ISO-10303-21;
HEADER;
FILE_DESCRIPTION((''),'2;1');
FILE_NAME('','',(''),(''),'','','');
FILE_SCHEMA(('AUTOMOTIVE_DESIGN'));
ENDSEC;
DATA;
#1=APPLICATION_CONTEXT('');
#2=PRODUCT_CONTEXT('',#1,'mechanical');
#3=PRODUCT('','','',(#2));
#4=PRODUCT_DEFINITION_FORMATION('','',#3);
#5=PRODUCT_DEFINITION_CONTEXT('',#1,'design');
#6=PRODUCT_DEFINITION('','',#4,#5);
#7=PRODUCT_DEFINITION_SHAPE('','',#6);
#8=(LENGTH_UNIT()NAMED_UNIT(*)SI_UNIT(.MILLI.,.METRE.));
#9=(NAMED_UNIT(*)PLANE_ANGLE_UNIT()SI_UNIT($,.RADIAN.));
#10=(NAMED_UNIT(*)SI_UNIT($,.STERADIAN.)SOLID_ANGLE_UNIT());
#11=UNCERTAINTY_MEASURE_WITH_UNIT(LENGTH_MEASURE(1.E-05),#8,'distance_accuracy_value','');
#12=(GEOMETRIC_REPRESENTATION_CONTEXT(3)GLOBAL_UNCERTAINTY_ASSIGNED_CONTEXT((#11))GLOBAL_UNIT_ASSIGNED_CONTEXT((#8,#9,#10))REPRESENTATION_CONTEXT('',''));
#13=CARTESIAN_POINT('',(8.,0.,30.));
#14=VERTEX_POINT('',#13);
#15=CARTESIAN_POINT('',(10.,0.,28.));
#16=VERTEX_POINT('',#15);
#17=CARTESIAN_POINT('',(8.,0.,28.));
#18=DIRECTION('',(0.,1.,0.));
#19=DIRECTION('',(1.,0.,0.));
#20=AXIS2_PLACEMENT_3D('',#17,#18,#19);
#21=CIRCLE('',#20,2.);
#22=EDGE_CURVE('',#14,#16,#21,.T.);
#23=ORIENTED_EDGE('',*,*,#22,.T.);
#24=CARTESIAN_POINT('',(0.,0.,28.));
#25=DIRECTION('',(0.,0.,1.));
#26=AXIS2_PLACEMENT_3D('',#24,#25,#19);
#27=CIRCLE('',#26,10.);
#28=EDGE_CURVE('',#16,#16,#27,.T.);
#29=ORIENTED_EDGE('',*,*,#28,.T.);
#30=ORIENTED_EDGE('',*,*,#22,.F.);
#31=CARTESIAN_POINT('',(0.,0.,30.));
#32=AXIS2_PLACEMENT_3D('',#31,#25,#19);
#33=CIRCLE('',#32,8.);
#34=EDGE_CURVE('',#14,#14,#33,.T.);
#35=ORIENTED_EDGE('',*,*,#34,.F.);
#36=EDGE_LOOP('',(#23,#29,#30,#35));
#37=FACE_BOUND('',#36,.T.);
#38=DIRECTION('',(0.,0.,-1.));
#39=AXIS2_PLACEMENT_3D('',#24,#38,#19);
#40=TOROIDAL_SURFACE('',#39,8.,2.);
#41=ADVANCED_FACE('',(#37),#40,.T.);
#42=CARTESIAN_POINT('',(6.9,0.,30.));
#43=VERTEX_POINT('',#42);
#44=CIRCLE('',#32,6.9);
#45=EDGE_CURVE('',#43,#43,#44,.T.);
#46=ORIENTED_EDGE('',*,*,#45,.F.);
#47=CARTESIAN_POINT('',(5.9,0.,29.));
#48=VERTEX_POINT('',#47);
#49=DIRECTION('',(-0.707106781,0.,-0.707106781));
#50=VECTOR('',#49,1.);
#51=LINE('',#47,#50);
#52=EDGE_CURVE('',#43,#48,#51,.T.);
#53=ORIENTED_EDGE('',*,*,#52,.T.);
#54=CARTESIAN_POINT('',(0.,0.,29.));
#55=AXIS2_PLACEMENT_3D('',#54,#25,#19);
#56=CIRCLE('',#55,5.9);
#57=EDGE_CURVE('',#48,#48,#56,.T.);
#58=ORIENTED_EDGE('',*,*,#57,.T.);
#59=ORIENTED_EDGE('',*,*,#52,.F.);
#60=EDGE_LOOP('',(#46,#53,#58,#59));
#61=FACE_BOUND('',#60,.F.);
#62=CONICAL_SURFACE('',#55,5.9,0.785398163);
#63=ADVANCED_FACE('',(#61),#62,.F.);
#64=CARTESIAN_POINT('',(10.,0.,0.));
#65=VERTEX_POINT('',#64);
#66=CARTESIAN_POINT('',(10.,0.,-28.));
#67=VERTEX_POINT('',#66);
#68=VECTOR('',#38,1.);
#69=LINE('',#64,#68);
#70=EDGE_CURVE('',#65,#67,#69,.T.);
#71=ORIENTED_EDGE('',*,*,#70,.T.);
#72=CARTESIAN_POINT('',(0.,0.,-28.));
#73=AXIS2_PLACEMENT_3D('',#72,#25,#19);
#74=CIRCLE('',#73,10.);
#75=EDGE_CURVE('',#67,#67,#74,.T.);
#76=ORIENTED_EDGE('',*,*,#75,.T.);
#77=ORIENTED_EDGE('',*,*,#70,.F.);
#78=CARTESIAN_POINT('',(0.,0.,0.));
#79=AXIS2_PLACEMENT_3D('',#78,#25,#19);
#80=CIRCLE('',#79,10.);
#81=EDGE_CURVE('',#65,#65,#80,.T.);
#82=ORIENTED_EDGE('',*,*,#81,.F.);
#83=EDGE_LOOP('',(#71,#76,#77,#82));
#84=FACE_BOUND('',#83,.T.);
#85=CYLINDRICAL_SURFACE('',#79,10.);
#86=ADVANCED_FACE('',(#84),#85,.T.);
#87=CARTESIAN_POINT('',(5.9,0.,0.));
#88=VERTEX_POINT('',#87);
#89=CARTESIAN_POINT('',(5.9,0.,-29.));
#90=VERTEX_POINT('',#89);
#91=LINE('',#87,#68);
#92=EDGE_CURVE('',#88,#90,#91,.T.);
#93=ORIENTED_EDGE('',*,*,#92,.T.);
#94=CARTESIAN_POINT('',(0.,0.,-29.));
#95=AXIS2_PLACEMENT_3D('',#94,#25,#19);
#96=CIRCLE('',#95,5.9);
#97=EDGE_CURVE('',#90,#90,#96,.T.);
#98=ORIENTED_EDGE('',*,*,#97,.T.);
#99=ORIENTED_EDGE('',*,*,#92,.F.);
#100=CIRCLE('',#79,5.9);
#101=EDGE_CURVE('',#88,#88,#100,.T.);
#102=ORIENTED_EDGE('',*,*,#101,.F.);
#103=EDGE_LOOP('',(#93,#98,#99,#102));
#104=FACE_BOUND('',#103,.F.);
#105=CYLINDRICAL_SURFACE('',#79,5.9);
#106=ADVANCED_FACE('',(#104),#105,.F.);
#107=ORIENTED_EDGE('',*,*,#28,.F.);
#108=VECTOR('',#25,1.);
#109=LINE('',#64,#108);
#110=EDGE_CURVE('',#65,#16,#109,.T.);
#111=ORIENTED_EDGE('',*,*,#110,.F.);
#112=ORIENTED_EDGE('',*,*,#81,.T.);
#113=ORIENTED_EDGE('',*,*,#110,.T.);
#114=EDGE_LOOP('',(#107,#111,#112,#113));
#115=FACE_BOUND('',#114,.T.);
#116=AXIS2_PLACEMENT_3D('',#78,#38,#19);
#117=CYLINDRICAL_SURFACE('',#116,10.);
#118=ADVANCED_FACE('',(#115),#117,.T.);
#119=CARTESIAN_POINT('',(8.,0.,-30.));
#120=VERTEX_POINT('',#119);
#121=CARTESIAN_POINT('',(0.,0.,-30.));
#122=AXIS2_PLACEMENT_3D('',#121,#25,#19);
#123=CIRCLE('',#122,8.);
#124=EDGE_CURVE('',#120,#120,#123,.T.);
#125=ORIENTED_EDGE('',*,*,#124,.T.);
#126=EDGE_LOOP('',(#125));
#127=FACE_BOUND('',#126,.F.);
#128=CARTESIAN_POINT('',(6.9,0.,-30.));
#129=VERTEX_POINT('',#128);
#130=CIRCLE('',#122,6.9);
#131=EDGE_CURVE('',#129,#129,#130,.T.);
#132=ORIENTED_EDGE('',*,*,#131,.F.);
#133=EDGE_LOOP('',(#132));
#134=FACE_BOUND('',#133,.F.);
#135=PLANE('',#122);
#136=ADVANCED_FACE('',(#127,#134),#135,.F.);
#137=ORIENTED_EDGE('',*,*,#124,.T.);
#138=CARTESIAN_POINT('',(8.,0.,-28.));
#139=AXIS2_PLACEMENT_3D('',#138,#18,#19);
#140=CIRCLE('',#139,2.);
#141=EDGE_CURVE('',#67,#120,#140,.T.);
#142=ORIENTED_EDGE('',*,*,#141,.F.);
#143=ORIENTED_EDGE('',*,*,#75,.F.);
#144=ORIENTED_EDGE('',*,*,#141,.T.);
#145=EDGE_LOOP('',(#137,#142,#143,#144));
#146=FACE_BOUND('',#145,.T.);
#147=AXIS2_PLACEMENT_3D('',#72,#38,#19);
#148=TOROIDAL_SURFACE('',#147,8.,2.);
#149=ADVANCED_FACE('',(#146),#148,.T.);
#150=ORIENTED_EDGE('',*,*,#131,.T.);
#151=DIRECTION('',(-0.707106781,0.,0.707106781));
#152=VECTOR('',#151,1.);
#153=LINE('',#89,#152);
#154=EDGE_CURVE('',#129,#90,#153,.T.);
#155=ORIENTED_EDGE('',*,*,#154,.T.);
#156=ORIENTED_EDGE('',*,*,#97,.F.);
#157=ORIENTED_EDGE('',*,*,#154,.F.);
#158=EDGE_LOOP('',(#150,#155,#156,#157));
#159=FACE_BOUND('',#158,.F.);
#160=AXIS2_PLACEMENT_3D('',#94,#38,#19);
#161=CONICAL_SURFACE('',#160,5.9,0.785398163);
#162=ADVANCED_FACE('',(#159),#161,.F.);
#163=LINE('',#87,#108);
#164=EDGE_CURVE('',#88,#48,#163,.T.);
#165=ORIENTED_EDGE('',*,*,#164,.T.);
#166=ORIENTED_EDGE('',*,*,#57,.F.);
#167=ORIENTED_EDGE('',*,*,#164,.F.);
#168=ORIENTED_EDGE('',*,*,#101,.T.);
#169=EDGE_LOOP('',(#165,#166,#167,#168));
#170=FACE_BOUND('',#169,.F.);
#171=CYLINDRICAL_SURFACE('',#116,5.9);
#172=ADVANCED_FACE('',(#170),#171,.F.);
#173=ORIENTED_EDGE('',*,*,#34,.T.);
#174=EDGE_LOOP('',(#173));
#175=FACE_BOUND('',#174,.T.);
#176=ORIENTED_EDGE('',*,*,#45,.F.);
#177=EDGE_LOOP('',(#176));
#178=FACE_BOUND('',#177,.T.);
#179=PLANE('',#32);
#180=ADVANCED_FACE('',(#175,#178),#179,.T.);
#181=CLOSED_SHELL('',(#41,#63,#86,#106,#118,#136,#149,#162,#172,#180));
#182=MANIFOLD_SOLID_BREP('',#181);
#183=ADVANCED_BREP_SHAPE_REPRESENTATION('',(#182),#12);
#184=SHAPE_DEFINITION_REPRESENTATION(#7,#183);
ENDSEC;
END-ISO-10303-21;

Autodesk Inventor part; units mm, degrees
ref_plane "YZ Plane" through (0, 0, 0) normal (1, 0, 0) x (0, 1, 0)
ref_plane "XZ Plane" through (0, 0, 0) normal (0, 1, 0) x (-1, 0, 0)
ref_plane "XY Plane" through (0, 0, 0) normal (0, 0, 1) x (1, 0, 0)
sketch "Sketch1" plane through (0, 0, 0) normal (0, 0, 1) x (1, 0, 0)
  circle A0 centre (0, 0) radius 5.9
  circle A1 centre (0, 0) radius 10
  dimension "d0" = 11.8
  dimension "d1" = 20
extrude "Extrusion1" add sketch "Sketch1" along normal mid plane 60
thread "Thread1" size "G 1/4-19" standard "BSP Pipe Threads" length 10
thread "Thread2" size "G 1/4-19" standard "BSP Pipe Threads" length 10
chamfer "Chamfer1" distance 1 angle 45 2 edges at (-5.9, 0, 30) (-5.9, 0, -30)
fillet "Fillet1" radius 2 2 edges at (-10, 0, -30) (-10, 0, 30)
properties part number "Plenum"
